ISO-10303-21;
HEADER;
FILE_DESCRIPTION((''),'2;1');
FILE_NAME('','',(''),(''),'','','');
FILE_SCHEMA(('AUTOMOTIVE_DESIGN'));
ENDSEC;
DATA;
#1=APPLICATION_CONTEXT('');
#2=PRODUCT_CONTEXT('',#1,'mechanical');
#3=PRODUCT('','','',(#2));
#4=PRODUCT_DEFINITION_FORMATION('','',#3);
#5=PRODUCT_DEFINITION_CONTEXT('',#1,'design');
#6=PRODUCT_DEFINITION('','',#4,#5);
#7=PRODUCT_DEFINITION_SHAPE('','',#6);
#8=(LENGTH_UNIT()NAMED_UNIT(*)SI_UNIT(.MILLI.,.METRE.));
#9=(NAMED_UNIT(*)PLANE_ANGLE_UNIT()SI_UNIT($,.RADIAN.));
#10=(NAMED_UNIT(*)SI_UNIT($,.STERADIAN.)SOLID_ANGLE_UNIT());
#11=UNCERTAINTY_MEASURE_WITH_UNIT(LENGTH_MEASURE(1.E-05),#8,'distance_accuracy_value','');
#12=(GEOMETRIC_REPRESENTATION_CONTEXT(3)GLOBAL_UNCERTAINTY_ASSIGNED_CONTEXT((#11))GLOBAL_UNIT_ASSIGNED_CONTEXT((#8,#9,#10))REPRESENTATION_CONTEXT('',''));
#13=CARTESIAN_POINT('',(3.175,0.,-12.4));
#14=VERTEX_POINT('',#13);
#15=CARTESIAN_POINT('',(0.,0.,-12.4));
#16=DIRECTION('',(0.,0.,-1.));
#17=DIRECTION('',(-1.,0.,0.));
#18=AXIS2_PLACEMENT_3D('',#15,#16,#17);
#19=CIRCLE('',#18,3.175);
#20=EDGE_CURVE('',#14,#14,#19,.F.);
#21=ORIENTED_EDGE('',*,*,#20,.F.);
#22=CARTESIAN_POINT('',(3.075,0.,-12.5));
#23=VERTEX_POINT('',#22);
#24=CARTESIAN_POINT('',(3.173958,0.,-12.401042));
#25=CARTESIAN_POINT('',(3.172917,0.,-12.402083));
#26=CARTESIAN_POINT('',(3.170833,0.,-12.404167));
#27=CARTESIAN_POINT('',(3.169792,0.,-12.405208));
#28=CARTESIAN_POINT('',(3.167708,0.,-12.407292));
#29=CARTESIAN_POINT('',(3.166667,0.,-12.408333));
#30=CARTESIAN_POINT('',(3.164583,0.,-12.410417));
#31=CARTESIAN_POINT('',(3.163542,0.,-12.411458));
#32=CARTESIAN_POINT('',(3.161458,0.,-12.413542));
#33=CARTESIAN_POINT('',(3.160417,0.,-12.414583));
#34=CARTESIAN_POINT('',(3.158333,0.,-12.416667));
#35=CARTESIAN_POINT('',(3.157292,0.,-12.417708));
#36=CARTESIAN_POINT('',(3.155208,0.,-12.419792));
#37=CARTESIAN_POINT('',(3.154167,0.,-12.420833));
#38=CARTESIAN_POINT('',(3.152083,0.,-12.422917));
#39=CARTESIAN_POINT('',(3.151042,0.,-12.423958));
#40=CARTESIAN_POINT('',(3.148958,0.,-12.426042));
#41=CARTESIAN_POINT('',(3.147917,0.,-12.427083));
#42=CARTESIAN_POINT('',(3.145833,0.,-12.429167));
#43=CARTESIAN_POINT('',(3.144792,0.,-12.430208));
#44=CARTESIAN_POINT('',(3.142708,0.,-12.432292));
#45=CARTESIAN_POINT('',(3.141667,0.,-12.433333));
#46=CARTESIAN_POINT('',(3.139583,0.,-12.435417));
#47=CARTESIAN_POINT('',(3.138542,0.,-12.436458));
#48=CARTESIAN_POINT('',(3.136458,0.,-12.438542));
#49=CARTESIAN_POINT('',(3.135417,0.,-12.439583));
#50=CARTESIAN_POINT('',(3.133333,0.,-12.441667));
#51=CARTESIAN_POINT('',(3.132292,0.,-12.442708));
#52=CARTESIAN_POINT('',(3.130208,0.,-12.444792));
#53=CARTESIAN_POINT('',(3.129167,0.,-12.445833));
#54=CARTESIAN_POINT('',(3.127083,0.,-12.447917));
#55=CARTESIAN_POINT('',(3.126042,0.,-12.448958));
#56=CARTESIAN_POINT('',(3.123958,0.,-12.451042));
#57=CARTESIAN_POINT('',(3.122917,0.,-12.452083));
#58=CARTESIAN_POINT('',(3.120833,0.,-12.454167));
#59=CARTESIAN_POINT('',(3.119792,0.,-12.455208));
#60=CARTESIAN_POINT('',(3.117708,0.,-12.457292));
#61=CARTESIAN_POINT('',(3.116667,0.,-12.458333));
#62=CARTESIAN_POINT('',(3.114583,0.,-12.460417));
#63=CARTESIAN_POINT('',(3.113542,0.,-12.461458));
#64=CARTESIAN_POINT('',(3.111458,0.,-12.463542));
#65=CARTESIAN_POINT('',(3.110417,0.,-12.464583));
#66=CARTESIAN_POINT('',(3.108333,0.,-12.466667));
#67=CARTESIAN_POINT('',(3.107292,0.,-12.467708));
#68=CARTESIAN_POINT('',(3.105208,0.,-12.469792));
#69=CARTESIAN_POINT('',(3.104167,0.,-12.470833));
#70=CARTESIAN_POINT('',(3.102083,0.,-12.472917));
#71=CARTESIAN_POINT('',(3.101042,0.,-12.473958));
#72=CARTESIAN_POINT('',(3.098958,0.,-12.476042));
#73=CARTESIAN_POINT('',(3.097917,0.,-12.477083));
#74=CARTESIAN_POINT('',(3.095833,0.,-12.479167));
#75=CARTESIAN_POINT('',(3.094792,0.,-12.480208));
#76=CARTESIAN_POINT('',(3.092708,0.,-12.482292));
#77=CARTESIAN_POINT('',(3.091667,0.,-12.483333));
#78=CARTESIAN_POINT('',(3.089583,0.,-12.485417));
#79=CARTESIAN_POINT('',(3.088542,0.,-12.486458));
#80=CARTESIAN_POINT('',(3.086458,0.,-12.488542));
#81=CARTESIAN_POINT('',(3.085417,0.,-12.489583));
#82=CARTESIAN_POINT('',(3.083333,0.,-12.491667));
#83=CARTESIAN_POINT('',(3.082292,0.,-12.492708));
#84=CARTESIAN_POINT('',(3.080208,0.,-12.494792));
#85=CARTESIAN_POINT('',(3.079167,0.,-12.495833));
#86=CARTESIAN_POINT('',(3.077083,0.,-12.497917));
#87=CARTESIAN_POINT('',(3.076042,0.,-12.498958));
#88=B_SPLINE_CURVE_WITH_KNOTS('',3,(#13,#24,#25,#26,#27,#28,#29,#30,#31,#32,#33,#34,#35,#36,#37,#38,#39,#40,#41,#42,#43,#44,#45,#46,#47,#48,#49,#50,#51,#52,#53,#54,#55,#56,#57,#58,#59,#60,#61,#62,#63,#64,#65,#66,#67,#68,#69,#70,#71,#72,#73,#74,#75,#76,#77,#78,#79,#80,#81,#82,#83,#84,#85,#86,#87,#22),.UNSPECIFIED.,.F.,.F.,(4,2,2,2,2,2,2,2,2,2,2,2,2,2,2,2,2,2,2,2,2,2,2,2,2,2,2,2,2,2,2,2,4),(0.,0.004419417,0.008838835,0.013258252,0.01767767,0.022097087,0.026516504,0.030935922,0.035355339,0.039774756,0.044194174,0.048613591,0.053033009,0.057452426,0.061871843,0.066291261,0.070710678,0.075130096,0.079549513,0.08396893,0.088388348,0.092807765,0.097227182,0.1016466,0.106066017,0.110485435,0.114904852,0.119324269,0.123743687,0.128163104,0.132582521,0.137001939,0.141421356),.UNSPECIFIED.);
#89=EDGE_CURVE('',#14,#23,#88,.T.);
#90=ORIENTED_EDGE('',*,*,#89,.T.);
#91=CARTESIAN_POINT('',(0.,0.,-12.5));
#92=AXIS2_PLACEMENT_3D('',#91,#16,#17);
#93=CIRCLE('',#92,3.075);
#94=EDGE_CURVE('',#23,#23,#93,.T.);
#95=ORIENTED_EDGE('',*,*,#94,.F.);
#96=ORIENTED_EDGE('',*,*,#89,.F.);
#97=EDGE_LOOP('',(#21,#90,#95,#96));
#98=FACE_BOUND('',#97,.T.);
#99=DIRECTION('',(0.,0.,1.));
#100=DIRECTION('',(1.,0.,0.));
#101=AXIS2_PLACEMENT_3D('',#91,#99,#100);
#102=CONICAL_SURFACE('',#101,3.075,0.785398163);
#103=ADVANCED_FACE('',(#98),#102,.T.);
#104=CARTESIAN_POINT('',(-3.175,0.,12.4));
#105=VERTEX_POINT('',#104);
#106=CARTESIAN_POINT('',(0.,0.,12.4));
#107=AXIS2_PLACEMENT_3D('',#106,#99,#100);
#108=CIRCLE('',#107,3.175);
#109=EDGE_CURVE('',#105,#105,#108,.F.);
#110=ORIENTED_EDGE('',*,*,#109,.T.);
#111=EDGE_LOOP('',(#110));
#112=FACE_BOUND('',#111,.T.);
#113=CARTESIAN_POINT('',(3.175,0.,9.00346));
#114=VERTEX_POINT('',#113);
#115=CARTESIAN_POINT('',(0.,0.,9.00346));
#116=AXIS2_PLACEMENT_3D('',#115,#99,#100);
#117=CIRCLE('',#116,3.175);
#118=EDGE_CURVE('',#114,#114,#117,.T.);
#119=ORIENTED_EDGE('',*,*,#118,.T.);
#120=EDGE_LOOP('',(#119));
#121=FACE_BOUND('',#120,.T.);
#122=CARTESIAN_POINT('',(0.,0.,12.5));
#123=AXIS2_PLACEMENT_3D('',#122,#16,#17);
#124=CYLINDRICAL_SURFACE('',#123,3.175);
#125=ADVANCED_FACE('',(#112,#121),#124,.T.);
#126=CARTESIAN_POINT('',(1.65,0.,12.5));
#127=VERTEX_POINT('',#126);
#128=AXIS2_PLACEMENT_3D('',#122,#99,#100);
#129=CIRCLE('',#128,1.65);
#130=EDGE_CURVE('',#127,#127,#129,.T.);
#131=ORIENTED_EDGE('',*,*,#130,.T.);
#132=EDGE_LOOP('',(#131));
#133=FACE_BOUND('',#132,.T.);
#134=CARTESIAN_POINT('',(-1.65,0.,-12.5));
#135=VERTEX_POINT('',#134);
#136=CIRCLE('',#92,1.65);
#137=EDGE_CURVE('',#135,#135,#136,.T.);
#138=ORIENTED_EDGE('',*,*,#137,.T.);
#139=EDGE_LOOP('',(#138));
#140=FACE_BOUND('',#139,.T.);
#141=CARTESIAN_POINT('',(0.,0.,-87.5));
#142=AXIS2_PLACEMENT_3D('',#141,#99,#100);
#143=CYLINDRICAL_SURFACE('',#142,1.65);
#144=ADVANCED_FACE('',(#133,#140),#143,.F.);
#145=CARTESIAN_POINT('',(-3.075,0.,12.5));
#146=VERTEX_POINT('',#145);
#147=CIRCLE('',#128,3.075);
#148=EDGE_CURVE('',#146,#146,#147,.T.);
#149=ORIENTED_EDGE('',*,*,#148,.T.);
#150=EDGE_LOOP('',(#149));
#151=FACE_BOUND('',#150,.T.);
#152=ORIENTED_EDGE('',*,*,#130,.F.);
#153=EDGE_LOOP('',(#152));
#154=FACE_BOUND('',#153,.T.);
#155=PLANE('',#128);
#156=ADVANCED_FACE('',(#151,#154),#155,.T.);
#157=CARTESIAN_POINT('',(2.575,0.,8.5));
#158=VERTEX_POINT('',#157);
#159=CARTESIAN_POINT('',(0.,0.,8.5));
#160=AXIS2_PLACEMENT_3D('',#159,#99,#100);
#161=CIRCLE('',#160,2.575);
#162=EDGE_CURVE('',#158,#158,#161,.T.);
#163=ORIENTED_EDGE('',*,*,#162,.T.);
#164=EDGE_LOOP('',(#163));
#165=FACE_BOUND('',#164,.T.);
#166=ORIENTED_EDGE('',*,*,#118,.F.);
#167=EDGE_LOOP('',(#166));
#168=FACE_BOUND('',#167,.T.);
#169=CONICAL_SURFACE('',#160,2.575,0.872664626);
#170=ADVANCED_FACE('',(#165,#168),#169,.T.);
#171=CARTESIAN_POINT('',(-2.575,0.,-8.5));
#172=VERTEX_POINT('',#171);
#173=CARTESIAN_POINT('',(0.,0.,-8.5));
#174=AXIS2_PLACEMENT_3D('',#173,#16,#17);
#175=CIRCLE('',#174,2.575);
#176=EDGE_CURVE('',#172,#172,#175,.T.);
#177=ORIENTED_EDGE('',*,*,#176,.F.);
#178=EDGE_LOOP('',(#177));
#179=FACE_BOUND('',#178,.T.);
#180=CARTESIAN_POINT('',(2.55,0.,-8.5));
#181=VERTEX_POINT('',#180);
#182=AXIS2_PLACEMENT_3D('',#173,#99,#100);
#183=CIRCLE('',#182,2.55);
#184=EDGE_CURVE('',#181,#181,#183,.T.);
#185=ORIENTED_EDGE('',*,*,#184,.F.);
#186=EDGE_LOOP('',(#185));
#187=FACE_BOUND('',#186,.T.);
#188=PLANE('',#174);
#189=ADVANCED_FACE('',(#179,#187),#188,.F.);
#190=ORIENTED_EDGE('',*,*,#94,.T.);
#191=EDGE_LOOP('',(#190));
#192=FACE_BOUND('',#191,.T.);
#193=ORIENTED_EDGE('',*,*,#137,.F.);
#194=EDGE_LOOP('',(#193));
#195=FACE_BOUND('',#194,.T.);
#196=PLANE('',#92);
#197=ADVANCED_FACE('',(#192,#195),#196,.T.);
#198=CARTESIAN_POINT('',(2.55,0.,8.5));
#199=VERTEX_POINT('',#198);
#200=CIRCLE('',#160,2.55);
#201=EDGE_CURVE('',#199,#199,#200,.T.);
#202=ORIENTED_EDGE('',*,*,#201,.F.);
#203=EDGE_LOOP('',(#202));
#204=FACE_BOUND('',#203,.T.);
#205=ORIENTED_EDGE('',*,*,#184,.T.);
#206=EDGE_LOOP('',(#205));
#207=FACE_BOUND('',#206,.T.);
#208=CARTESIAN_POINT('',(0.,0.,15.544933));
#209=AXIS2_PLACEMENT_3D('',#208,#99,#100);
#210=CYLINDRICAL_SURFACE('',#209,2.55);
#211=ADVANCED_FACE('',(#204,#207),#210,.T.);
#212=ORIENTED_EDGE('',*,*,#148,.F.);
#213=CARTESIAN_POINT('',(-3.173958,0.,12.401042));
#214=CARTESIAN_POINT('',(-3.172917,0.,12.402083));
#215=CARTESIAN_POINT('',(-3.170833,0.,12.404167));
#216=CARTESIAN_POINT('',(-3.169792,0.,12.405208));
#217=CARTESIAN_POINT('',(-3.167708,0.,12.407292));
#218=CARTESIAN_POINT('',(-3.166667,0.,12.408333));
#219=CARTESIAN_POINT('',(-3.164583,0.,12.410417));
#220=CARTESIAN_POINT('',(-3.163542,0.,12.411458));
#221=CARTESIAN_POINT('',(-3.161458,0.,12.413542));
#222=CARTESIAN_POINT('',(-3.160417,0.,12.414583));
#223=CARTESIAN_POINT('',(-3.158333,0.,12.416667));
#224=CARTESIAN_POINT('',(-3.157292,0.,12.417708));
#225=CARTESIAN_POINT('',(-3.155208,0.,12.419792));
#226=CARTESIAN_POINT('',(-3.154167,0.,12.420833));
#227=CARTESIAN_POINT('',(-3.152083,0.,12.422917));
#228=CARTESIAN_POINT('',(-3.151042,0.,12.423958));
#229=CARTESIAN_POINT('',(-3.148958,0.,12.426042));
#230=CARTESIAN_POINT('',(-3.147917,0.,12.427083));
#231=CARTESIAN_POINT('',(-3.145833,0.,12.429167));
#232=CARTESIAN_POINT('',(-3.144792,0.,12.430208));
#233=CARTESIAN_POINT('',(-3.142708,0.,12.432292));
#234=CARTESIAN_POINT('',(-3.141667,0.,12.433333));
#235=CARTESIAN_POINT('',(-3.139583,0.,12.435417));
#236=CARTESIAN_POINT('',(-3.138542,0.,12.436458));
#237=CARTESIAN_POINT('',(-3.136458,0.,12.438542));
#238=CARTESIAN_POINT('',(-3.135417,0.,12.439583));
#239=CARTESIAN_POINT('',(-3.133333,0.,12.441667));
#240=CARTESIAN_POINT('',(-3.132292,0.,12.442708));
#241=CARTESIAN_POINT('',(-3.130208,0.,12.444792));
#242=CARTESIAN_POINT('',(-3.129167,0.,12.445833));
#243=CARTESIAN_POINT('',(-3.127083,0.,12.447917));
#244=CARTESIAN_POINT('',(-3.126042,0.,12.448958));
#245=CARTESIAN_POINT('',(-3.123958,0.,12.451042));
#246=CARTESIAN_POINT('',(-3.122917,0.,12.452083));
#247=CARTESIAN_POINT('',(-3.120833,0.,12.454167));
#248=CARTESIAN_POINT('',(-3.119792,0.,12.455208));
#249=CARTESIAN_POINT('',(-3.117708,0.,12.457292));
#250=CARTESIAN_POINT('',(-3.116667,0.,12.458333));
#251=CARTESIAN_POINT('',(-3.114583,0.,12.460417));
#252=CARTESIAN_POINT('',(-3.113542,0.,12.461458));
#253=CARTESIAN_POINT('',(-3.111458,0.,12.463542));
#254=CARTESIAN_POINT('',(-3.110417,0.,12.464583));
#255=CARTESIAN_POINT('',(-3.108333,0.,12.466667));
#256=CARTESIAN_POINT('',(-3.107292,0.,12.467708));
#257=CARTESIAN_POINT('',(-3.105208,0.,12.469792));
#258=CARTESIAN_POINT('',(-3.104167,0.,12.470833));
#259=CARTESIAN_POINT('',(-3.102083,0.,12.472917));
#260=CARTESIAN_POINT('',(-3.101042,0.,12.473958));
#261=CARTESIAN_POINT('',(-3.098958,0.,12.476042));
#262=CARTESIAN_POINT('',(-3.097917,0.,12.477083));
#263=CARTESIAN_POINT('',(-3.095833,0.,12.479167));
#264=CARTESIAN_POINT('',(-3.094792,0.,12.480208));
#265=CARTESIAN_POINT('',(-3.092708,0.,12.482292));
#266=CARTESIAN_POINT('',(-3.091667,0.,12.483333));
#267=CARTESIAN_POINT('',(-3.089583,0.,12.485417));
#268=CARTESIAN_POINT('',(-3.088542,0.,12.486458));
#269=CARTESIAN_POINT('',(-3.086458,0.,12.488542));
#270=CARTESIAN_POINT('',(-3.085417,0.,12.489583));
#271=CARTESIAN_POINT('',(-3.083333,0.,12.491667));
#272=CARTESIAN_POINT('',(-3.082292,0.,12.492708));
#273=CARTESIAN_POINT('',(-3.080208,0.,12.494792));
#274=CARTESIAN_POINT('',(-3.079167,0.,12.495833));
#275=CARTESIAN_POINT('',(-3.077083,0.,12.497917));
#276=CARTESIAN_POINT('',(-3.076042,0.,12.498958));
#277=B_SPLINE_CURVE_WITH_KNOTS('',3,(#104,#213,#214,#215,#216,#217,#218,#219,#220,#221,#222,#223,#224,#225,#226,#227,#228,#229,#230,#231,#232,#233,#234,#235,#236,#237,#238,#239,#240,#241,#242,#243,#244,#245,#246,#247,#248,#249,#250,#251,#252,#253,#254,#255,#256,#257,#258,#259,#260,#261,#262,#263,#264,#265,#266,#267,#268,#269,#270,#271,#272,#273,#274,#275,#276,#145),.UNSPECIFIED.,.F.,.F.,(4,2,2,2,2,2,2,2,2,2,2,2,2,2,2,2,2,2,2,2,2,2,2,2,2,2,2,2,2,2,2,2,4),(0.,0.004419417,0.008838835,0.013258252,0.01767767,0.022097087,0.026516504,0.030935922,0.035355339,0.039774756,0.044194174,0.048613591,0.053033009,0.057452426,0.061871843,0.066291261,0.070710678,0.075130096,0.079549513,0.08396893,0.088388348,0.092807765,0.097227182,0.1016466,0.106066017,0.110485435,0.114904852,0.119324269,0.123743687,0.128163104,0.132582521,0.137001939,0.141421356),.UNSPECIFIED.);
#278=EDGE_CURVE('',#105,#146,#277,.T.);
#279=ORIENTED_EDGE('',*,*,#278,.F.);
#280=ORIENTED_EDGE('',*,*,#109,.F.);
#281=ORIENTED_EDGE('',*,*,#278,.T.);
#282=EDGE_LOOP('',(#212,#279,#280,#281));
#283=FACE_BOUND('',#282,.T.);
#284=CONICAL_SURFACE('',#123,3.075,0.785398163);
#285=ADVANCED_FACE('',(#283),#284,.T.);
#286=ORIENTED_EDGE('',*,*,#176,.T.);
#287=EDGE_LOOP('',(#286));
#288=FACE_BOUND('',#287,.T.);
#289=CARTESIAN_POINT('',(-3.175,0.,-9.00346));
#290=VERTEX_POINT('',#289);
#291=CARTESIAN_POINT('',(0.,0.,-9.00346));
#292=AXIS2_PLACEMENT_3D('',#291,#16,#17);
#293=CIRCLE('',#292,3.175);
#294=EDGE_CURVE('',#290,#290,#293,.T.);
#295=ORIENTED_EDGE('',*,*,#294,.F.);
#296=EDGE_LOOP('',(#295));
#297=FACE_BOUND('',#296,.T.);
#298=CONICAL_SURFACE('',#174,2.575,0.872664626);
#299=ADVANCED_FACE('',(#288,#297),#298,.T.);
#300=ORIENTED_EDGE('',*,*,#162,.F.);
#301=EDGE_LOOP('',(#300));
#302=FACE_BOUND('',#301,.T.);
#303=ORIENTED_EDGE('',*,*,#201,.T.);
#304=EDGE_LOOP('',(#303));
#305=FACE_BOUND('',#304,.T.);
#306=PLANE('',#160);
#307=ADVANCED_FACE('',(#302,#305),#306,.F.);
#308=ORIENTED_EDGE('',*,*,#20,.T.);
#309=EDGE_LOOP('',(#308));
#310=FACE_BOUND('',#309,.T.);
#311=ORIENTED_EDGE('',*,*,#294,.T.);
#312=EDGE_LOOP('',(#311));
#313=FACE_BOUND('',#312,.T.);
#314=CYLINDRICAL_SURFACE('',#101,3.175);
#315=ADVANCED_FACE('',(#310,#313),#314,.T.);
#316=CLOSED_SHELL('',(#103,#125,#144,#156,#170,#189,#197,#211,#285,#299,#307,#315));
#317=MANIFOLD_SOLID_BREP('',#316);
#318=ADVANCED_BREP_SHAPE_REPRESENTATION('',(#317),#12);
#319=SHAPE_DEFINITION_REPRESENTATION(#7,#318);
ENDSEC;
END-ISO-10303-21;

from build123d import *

# Parameters (mm, degrees)
IZIM1_W                     = 17
IZIM1_H                     = 2.55
IZIM4_R                     = 2.575
Y_KSEKLIK_EKSTR_ZYON1_DEPTH = 0.6
IZIM5_R                     = 3.175
Y_KSEKLIK_EKSTR_ZYON2_DEPTH = 3.4
IZIM7_R                     = 2.575
Y_KSEKLIK_EKSTR_ZYON4_DEPTH = 0.6
Y_KSEKLIK_EKSTR_ZYON5_START = 3.4
IZIM8_R                     = 3.175
Y_KSEKLIK_EKSTR_ZYON5_DEPTH = 3.4
IZIM9_R                     = 1.65
KES_EKSTR_ZYON1_DEPTH       = 100
PAH1_SIZE                   = 0.1


# Read off the part's stored shape, not the designer's step: Draft2, Draft3
with BuildPart() as part:
    # Çizim1 → Döndür3 (revolve)
    with BuildSketch(Plane(origin=(0, 0, 0), x_dir=(0, 0, -1), z_dir=(1, 0, 0)), mode=Mode.PRIVATE) as d_nd_r3_sk:
        with Locations((0, -1.275)):
            Rectangle(IZIM1_W, IZIM1_H)
    revolve(d_nd_r3_sk.sketch.rotate(Axis((0, 0, 15.544933078), (0, 0, -1)), 270), axis=Axis((0, 0, 15.544933078), (0, 0, -1)))

    # Çizim4 → Yükseklik-Ekstrüzyon1 (add)
    with BuildSketch(Plane(origin=(0, 0, -8.5), x_dir=(-1, 0, 0), z_dir=(0, 0, -1))):
        Circle(IZIM4_R)
    extrude(amount=Y_KSEKLIK_EKSTR_ZYON1_DEPTH)

    # Çizim5 → Yükseklik-Ekstrüzyon2 (add)
    with BuildSketch(Plane(origin=(0, 0, -9.1), x_dir=(-1, 0, 0), z_dir=(0, 0, -1))):
        Circle(IZIM5_R)
    extrude(amount=Y_KSEKLIK_EKSTR_ZYON2_DEPTH)

    # Draft2 outline → Draft2 (revolve)
    with BuildSketch(Plane.XZ):
        Polygon((3.175, -9.003459779), (2.575, -8.5), (2.575, -9.1), (3.175, -9.1), align=None)
    revolve(axis=Axis((0, 0, 0), (0, 0, 1)))

    # Çizim7 → Yükseklik-Ekstrüzyon4 (add)
    with BuildSketch(Plane.XY.offset(8.5)):
        Circle(IZIM7_R)
    extrude(amount=Y_KSEKLIK_EKSTR_ZYON4_DEPTH)

    # Çizim8 → Yükseklik-Ekstrüzyon5 (add)
    with BuildSketch(Plane.XY.offset(9.1).offset(Y_KSEKLIK_EKSTR_ZYON5_START)):
        with Locations(Location((0, 0, 0), (0, 0, 180))):
            Circle(IZIM8_R)
    extrude(amount=-Y_KSEKLIK_EKSTR_ZYON5_DEPTH)

    # Draft3 outline → Draft3 (revolve)
    with BuildSketch(Plane.XZ):
        Polygon((2.575, 8.5), (3.175, 9.003459779), (3.175, 9.1), (2.575, 9.1), align=None)
    revolve(axis=Axis((0, 0, 0), (0, 0, 1)))

    # Çizim9 → Kes-Ekstrüzyon1 (cut)
    with BuildSketch(Plane.XY.offset(12.5)):
        Circle(IZIM9_R)
    extrude(amount=-KES_EKSTR_ZYON1_DEPTH, mode=Mode.SUBTRACT)

    # Pah1
    pah1_edges = [part.edges().sort_by_distance(p)[0] for p in [
        (3.175, 0, -12.5),
        (3.175, 0, 12.5),
    ]]
    chamfer(pah1_edges, length=PAH1_SIZE)


solid = part.part
